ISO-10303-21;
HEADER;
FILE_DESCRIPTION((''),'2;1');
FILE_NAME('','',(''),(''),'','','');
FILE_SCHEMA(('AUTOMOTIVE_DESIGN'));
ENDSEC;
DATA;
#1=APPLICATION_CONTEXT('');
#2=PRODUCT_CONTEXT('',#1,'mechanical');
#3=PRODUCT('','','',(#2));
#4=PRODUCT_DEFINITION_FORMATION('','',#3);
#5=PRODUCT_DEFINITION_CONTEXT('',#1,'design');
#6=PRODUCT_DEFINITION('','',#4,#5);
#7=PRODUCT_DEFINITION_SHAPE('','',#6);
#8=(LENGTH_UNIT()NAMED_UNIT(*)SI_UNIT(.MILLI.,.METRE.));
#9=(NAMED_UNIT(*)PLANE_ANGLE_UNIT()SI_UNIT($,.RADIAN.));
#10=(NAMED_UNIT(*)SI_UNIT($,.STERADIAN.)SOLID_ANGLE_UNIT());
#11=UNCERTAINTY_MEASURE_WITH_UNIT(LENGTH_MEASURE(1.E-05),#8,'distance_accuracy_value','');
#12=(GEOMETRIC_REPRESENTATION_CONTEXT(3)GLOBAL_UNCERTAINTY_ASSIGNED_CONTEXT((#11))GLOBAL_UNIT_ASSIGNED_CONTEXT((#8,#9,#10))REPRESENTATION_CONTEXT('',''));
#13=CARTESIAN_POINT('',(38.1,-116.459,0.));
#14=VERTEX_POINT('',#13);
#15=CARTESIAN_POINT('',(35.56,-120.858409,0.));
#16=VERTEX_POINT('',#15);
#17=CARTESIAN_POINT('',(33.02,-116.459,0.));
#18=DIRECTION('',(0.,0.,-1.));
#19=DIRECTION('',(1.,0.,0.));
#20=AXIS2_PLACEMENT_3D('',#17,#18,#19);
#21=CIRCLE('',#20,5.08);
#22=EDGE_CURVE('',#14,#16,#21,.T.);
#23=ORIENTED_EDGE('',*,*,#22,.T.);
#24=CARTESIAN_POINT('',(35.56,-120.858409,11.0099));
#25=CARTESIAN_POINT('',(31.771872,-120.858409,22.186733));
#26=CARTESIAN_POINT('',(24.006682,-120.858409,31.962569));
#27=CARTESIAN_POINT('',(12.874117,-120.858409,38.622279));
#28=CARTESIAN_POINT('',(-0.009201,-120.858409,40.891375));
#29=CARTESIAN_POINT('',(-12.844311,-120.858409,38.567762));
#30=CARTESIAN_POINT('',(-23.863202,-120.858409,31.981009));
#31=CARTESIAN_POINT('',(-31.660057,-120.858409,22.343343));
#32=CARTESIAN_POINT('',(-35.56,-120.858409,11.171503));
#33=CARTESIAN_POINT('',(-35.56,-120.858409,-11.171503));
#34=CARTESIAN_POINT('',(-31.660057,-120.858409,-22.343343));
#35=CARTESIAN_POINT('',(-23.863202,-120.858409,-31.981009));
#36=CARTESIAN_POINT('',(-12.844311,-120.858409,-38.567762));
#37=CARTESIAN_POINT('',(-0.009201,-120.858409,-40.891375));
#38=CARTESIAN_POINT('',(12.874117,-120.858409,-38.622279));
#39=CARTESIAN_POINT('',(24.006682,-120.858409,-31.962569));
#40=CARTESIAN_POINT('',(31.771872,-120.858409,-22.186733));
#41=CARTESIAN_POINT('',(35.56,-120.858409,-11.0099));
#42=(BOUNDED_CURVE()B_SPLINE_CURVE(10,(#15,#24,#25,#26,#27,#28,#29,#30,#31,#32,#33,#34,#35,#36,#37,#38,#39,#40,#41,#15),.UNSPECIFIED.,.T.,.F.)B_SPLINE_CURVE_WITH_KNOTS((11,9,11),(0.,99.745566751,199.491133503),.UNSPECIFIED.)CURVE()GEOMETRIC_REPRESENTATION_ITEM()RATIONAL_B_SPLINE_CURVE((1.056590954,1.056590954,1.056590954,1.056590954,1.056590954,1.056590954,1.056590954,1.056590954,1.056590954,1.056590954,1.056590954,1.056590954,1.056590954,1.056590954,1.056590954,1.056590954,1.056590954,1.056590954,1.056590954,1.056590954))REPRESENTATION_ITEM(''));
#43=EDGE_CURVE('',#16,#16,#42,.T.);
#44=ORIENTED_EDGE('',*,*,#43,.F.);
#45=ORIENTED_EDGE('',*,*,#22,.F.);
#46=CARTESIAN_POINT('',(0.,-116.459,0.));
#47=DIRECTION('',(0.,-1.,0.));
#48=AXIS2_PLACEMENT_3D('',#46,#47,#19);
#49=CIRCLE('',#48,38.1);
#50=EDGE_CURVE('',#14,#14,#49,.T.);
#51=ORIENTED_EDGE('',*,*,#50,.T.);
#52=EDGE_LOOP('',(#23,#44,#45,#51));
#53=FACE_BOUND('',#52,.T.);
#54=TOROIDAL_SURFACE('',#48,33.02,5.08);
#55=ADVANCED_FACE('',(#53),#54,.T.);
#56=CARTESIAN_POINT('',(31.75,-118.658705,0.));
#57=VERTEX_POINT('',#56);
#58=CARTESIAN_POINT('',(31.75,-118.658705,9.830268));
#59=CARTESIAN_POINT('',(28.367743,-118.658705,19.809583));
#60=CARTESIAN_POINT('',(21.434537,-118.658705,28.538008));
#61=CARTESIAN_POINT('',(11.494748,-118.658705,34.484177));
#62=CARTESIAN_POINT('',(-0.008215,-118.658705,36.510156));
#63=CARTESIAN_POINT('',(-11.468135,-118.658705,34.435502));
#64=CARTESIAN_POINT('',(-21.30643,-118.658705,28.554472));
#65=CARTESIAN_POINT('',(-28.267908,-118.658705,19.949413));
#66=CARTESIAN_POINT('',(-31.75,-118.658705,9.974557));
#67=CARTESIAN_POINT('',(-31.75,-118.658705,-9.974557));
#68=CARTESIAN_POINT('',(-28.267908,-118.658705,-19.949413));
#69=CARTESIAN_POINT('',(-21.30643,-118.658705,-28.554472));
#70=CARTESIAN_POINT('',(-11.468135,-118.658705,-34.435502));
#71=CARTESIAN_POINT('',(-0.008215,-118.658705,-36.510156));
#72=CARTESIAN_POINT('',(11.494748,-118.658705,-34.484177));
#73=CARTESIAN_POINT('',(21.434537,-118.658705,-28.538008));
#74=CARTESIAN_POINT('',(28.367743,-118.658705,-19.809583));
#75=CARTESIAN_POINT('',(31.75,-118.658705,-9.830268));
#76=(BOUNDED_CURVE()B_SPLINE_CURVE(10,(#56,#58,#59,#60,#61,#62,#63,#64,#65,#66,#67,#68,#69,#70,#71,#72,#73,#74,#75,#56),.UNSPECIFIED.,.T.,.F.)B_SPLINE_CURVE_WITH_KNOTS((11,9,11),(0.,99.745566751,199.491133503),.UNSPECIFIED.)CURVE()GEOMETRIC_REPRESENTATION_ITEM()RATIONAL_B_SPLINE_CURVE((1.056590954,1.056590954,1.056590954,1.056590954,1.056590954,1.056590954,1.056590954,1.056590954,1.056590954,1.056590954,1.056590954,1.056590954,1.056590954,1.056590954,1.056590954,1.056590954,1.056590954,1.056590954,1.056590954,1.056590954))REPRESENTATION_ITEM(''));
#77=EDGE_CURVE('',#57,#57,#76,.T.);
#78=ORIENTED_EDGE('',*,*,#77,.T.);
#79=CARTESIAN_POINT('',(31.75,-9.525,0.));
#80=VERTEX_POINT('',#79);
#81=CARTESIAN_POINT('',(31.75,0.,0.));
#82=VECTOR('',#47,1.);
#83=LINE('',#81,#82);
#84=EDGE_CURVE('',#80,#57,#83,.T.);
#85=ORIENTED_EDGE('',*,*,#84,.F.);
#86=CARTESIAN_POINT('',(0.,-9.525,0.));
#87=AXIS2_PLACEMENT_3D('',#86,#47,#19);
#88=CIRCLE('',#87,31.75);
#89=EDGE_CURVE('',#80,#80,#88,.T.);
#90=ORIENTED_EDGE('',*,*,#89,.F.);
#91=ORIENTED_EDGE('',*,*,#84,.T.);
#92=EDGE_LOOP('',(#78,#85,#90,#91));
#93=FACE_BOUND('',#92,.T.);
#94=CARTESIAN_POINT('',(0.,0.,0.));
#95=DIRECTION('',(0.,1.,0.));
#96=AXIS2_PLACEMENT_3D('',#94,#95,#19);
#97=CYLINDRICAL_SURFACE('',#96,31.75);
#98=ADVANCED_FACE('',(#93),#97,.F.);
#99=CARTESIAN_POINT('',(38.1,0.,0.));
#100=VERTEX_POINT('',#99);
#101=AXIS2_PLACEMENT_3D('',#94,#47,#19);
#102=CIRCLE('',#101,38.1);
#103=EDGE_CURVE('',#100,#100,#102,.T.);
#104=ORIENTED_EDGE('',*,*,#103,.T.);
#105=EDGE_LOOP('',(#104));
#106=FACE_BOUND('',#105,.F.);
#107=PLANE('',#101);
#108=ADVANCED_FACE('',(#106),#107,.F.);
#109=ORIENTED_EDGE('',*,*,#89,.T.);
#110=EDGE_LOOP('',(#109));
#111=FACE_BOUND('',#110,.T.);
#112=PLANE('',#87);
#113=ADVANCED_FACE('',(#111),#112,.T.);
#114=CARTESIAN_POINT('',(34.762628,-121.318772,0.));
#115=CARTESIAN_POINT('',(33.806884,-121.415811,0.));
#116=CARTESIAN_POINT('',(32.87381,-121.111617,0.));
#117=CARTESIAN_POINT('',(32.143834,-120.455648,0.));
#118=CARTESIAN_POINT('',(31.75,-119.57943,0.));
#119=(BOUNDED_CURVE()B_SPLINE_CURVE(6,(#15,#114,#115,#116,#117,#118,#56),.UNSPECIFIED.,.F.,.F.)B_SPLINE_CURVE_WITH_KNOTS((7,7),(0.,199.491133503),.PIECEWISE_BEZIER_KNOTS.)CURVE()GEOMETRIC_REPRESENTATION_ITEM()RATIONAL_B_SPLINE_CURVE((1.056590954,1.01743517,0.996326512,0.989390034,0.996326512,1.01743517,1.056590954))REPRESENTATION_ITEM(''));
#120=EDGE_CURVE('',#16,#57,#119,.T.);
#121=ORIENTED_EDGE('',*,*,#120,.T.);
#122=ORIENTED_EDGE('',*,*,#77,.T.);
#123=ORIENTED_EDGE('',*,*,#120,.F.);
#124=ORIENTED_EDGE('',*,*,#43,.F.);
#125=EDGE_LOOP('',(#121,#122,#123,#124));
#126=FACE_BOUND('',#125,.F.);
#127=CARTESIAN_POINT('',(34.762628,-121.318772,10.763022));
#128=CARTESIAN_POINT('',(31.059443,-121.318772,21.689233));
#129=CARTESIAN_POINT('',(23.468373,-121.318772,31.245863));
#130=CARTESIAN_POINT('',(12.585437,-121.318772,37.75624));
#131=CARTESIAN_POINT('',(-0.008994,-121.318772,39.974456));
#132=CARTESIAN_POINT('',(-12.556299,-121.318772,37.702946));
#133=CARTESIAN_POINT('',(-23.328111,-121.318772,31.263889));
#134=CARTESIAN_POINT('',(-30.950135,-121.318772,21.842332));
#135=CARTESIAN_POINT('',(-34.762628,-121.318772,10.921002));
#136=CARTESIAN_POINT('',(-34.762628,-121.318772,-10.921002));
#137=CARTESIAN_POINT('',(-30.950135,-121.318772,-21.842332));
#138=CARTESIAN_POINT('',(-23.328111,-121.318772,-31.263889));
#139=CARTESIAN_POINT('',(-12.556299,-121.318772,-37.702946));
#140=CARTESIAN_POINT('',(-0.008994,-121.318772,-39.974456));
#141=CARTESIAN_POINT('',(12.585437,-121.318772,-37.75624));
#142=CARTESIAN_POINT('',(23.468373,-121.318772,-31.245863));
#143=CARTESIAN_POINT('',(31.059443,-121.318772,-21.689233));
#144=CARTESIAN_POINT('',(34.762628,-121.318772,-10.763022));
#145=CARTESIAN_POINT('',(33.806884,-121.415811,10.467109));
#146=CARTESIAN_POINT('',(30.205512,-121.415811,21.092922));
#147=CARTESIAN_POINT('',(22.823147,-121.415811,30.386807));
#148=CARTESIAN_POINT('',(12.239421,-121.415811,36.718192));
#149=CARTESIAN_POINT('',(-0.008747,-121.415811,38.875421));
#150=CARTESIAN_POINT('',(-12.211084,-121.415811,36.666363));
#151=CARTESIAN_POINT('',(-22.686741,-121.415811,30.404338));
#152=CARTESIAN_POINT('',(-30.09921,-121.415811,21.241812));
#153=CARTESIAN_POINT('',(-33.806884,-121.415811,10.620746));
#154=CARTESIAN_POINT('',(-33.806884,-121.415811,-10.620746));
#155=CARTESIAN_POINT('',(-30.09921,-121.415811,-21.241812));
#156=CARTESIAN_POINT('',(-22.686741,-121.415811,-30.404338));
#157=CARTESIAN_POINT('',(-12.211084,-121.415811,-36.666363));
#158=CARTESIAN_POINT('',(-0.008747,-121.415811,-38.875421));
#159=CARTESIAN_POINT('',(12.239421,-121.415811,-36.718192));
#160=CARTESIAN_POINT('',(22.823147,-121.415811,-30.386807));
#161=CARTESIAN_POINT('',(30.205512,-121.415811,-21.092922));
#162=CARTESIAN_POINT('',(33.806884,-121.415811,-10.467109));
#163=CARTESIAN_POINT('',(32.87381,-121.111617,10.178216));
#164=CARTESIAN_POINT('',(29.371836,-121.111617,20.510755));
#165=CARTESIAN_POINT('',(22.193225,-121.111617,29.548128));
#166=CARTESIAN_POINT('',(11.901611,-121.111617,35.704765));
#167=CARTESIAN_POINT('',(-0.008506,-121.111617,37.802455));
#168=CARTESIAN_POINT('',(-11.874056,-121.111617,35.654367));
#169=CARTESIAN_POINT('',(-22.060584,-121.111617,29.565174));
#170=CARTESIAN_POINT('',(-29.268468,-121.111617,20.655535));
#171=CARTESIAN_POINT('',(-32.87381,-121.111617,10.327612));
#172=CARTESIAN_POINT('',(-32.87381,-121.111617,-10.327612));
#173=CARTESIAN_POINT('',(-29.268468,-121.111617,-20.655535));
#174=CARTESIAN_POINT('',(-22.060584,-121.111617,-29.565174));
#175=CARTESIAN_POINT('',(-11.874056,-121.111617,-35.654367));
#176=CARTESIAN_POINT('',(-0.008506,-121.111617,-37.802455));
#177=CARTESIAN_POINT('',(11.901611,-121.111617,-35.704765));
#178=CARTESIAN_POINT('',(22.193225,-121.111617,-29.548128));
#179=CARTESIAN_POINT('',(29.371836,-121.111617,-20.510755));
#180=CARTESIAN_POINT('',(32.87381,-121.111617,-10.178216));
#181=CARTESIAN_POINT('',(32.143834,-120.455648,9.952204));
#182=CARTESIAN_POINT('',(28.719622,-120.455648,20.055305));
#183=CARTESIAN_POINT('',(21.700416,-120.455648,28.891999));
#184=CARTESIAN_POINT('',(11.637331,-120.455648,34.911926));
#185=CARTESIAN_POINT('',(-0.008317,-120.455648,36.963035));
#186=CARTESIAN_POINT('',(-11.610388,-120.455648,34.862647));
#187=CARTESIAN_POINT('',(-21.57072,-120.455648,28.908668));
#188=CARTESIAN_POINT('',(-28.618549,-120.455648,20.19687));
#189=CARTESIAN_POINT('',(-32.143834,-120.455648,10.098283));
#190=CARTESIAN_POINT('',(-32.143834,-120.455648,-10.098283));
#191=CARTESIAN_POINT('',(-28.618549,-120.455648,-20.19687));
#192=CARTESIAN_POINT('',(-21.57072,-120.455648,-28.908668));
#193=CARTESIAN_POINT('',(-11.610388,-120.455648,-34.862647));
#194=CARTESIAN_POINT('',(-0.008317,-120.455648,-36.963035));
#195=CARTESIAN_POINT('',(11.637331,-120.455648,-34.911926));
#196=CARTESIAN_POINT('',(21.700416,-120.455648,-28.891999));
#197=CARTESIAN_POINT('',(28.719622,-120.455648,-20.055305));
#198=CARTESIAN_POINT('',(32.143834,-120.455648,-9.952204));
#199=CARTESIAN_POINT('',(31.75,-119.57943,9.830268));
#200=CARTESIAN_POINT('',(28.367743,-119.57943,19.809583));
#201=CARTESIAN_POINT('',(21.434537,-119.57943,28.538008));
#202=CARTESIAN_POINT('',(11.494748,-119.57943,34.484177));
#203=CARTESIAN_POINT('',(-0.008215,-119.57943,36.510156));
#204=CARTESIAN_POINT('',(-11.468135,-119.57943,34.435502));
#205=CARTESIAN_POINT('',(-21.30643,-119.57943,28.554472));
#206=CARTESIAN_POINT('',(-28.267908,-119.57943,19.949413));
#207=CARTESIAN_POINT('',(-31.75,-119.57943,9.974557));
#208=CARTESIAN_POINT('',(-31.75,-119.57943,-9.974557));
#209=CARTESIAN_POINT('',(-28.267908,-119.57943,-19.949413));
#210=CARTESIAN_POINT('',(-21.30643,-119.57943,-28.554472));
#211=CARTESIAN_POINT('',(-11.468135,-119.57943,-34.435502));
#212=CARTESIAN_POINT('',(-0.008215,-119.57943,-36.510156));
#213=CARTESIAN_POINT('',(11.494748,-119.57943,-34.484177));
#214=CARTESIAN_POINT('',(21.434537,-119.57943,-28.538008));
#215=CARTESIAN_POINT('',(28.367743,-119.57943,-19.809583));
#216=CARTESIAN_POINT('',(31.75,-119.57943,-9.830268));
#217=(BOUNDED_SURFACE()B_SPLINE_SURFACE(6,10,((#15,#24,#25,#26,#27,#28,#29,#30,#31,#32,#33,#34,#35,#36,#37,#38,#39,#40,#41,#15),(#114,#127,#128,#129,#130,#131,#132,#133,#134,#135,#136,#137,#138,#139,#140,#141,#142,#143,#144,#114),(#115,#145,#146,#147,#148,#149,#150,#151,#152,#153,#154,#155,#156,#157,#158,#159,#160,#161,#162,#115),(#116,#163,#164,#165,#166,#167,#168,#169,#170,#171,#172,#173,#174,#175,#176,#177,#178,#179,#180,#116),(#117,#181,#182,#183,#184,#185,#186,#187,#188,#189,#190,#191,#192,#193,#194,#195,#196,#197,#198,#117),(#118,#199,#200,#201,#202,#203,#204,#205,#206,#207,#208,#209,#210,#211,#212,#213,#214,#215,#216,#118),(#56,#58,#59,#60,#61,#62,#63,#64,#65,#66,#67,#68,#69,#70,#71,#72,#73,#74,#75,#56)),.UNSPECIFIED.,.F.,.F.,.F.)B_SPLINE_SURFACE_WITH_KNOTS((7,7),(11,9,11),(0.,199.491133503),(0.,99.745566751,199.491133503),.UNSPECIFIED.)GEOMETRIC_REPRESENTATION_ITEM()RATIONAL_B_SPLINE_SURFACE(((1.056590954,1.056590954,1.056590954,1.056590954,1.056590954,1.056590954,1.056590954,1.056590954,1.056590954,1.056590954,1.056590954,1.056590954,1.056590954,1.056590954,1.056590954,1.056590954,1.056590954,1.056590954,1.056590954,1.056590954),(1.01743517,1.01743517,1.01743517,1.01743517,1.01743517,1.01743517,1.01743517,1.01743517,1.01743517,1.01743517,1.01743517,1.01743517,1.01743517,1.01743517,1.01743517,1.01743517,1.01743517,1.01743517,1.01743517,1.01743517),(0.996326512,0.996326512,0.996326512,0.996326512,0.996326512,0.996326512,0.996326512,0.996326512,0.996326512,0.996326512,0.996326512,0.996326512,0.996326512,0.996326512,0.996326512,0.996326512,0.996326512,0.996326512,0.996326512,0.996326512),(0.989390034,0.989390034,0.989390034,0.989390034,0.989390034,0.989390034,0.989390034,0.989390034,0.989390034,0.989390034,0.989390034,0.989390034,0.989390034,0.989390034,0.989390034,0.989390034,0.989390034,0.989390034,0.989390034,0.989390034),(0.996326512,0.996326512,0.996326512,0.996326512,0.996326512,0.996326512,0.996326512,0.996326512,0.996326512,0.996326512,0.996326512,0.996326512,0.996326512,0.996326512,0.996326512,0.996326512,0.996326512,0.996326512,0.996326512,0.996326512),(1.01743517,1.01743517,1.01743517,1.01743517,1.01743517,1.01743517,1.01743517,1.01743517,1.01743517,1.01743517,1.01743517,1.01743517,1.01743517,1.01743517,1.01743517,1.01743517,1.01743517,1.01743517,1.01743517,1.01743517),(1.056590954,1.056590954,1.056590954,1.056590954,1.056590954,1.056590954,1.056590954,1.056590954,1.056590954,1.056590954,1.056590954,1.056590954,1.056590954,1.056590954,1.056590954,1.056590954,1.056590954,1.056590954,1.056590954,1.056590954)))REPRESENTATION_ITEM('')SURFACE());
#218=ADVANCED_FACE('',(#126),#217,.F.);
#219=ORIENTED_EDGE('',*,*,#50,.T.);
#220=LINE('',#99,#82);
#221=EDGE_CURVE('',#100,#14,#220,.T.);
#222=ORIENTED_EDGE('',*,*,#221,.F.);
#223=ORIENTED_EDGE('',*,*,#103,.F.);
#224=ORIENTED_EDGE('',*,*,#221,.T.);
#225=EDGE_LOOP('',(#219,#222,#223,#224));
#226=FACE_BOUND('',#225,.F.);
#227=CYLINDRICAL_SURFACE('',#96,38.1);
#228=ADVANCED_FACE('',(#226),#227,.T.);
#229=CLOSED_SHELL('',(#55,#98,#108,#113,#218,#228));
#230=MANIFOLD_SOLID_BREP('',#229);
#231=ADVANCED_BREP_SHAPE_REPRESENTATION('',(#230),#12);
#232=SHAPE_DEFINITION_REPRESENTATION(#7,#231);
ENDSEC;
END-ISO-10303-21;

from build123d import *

# Parameters (mm, degrees)
F0_R     = 38.1
F0_R_2   = 31.75
F1_DEPTH = 121.539
F2_DEPTH = 9.525
F3_R     = 5.08
F4_R     = 2.54


# Not quite as in the source:
# - a length typed as a fraction of an inch, garbled in the dataset ("3 / 203.2 mm" for 3/8 in), is restored


with BuildPart() as f1:
    # F0 (on Front) → F1 (new body)
    with BuildSketch(Plane.XZ):
        Circle(F0_R)
        Circle(F0_R_2, mode=Mode.SUBTRACT)
    extrude(amount=F1_DEPTH)

    # F0 (on Front) → F2 (join)
    with BuildSketch(Plane.XZ):
        Circle(F0_R_2)
    extrude(amount=F2_DEPTH)

    # F3
    f3_edges = [f1.edges().sort_by_distance(p)[0] for p in [
        (-38.1, -121.539, 0),
    ]]
    fillet(f3_edges, radius=F3_R)

    # F4
    f4_edges = [f1.edges().sort_by_distance(p)[0] for p in [
        (-31.75, -121.539, 0),
    ]]
    fillet(f4_edges, radius=F4_R)


solid = f1.part
